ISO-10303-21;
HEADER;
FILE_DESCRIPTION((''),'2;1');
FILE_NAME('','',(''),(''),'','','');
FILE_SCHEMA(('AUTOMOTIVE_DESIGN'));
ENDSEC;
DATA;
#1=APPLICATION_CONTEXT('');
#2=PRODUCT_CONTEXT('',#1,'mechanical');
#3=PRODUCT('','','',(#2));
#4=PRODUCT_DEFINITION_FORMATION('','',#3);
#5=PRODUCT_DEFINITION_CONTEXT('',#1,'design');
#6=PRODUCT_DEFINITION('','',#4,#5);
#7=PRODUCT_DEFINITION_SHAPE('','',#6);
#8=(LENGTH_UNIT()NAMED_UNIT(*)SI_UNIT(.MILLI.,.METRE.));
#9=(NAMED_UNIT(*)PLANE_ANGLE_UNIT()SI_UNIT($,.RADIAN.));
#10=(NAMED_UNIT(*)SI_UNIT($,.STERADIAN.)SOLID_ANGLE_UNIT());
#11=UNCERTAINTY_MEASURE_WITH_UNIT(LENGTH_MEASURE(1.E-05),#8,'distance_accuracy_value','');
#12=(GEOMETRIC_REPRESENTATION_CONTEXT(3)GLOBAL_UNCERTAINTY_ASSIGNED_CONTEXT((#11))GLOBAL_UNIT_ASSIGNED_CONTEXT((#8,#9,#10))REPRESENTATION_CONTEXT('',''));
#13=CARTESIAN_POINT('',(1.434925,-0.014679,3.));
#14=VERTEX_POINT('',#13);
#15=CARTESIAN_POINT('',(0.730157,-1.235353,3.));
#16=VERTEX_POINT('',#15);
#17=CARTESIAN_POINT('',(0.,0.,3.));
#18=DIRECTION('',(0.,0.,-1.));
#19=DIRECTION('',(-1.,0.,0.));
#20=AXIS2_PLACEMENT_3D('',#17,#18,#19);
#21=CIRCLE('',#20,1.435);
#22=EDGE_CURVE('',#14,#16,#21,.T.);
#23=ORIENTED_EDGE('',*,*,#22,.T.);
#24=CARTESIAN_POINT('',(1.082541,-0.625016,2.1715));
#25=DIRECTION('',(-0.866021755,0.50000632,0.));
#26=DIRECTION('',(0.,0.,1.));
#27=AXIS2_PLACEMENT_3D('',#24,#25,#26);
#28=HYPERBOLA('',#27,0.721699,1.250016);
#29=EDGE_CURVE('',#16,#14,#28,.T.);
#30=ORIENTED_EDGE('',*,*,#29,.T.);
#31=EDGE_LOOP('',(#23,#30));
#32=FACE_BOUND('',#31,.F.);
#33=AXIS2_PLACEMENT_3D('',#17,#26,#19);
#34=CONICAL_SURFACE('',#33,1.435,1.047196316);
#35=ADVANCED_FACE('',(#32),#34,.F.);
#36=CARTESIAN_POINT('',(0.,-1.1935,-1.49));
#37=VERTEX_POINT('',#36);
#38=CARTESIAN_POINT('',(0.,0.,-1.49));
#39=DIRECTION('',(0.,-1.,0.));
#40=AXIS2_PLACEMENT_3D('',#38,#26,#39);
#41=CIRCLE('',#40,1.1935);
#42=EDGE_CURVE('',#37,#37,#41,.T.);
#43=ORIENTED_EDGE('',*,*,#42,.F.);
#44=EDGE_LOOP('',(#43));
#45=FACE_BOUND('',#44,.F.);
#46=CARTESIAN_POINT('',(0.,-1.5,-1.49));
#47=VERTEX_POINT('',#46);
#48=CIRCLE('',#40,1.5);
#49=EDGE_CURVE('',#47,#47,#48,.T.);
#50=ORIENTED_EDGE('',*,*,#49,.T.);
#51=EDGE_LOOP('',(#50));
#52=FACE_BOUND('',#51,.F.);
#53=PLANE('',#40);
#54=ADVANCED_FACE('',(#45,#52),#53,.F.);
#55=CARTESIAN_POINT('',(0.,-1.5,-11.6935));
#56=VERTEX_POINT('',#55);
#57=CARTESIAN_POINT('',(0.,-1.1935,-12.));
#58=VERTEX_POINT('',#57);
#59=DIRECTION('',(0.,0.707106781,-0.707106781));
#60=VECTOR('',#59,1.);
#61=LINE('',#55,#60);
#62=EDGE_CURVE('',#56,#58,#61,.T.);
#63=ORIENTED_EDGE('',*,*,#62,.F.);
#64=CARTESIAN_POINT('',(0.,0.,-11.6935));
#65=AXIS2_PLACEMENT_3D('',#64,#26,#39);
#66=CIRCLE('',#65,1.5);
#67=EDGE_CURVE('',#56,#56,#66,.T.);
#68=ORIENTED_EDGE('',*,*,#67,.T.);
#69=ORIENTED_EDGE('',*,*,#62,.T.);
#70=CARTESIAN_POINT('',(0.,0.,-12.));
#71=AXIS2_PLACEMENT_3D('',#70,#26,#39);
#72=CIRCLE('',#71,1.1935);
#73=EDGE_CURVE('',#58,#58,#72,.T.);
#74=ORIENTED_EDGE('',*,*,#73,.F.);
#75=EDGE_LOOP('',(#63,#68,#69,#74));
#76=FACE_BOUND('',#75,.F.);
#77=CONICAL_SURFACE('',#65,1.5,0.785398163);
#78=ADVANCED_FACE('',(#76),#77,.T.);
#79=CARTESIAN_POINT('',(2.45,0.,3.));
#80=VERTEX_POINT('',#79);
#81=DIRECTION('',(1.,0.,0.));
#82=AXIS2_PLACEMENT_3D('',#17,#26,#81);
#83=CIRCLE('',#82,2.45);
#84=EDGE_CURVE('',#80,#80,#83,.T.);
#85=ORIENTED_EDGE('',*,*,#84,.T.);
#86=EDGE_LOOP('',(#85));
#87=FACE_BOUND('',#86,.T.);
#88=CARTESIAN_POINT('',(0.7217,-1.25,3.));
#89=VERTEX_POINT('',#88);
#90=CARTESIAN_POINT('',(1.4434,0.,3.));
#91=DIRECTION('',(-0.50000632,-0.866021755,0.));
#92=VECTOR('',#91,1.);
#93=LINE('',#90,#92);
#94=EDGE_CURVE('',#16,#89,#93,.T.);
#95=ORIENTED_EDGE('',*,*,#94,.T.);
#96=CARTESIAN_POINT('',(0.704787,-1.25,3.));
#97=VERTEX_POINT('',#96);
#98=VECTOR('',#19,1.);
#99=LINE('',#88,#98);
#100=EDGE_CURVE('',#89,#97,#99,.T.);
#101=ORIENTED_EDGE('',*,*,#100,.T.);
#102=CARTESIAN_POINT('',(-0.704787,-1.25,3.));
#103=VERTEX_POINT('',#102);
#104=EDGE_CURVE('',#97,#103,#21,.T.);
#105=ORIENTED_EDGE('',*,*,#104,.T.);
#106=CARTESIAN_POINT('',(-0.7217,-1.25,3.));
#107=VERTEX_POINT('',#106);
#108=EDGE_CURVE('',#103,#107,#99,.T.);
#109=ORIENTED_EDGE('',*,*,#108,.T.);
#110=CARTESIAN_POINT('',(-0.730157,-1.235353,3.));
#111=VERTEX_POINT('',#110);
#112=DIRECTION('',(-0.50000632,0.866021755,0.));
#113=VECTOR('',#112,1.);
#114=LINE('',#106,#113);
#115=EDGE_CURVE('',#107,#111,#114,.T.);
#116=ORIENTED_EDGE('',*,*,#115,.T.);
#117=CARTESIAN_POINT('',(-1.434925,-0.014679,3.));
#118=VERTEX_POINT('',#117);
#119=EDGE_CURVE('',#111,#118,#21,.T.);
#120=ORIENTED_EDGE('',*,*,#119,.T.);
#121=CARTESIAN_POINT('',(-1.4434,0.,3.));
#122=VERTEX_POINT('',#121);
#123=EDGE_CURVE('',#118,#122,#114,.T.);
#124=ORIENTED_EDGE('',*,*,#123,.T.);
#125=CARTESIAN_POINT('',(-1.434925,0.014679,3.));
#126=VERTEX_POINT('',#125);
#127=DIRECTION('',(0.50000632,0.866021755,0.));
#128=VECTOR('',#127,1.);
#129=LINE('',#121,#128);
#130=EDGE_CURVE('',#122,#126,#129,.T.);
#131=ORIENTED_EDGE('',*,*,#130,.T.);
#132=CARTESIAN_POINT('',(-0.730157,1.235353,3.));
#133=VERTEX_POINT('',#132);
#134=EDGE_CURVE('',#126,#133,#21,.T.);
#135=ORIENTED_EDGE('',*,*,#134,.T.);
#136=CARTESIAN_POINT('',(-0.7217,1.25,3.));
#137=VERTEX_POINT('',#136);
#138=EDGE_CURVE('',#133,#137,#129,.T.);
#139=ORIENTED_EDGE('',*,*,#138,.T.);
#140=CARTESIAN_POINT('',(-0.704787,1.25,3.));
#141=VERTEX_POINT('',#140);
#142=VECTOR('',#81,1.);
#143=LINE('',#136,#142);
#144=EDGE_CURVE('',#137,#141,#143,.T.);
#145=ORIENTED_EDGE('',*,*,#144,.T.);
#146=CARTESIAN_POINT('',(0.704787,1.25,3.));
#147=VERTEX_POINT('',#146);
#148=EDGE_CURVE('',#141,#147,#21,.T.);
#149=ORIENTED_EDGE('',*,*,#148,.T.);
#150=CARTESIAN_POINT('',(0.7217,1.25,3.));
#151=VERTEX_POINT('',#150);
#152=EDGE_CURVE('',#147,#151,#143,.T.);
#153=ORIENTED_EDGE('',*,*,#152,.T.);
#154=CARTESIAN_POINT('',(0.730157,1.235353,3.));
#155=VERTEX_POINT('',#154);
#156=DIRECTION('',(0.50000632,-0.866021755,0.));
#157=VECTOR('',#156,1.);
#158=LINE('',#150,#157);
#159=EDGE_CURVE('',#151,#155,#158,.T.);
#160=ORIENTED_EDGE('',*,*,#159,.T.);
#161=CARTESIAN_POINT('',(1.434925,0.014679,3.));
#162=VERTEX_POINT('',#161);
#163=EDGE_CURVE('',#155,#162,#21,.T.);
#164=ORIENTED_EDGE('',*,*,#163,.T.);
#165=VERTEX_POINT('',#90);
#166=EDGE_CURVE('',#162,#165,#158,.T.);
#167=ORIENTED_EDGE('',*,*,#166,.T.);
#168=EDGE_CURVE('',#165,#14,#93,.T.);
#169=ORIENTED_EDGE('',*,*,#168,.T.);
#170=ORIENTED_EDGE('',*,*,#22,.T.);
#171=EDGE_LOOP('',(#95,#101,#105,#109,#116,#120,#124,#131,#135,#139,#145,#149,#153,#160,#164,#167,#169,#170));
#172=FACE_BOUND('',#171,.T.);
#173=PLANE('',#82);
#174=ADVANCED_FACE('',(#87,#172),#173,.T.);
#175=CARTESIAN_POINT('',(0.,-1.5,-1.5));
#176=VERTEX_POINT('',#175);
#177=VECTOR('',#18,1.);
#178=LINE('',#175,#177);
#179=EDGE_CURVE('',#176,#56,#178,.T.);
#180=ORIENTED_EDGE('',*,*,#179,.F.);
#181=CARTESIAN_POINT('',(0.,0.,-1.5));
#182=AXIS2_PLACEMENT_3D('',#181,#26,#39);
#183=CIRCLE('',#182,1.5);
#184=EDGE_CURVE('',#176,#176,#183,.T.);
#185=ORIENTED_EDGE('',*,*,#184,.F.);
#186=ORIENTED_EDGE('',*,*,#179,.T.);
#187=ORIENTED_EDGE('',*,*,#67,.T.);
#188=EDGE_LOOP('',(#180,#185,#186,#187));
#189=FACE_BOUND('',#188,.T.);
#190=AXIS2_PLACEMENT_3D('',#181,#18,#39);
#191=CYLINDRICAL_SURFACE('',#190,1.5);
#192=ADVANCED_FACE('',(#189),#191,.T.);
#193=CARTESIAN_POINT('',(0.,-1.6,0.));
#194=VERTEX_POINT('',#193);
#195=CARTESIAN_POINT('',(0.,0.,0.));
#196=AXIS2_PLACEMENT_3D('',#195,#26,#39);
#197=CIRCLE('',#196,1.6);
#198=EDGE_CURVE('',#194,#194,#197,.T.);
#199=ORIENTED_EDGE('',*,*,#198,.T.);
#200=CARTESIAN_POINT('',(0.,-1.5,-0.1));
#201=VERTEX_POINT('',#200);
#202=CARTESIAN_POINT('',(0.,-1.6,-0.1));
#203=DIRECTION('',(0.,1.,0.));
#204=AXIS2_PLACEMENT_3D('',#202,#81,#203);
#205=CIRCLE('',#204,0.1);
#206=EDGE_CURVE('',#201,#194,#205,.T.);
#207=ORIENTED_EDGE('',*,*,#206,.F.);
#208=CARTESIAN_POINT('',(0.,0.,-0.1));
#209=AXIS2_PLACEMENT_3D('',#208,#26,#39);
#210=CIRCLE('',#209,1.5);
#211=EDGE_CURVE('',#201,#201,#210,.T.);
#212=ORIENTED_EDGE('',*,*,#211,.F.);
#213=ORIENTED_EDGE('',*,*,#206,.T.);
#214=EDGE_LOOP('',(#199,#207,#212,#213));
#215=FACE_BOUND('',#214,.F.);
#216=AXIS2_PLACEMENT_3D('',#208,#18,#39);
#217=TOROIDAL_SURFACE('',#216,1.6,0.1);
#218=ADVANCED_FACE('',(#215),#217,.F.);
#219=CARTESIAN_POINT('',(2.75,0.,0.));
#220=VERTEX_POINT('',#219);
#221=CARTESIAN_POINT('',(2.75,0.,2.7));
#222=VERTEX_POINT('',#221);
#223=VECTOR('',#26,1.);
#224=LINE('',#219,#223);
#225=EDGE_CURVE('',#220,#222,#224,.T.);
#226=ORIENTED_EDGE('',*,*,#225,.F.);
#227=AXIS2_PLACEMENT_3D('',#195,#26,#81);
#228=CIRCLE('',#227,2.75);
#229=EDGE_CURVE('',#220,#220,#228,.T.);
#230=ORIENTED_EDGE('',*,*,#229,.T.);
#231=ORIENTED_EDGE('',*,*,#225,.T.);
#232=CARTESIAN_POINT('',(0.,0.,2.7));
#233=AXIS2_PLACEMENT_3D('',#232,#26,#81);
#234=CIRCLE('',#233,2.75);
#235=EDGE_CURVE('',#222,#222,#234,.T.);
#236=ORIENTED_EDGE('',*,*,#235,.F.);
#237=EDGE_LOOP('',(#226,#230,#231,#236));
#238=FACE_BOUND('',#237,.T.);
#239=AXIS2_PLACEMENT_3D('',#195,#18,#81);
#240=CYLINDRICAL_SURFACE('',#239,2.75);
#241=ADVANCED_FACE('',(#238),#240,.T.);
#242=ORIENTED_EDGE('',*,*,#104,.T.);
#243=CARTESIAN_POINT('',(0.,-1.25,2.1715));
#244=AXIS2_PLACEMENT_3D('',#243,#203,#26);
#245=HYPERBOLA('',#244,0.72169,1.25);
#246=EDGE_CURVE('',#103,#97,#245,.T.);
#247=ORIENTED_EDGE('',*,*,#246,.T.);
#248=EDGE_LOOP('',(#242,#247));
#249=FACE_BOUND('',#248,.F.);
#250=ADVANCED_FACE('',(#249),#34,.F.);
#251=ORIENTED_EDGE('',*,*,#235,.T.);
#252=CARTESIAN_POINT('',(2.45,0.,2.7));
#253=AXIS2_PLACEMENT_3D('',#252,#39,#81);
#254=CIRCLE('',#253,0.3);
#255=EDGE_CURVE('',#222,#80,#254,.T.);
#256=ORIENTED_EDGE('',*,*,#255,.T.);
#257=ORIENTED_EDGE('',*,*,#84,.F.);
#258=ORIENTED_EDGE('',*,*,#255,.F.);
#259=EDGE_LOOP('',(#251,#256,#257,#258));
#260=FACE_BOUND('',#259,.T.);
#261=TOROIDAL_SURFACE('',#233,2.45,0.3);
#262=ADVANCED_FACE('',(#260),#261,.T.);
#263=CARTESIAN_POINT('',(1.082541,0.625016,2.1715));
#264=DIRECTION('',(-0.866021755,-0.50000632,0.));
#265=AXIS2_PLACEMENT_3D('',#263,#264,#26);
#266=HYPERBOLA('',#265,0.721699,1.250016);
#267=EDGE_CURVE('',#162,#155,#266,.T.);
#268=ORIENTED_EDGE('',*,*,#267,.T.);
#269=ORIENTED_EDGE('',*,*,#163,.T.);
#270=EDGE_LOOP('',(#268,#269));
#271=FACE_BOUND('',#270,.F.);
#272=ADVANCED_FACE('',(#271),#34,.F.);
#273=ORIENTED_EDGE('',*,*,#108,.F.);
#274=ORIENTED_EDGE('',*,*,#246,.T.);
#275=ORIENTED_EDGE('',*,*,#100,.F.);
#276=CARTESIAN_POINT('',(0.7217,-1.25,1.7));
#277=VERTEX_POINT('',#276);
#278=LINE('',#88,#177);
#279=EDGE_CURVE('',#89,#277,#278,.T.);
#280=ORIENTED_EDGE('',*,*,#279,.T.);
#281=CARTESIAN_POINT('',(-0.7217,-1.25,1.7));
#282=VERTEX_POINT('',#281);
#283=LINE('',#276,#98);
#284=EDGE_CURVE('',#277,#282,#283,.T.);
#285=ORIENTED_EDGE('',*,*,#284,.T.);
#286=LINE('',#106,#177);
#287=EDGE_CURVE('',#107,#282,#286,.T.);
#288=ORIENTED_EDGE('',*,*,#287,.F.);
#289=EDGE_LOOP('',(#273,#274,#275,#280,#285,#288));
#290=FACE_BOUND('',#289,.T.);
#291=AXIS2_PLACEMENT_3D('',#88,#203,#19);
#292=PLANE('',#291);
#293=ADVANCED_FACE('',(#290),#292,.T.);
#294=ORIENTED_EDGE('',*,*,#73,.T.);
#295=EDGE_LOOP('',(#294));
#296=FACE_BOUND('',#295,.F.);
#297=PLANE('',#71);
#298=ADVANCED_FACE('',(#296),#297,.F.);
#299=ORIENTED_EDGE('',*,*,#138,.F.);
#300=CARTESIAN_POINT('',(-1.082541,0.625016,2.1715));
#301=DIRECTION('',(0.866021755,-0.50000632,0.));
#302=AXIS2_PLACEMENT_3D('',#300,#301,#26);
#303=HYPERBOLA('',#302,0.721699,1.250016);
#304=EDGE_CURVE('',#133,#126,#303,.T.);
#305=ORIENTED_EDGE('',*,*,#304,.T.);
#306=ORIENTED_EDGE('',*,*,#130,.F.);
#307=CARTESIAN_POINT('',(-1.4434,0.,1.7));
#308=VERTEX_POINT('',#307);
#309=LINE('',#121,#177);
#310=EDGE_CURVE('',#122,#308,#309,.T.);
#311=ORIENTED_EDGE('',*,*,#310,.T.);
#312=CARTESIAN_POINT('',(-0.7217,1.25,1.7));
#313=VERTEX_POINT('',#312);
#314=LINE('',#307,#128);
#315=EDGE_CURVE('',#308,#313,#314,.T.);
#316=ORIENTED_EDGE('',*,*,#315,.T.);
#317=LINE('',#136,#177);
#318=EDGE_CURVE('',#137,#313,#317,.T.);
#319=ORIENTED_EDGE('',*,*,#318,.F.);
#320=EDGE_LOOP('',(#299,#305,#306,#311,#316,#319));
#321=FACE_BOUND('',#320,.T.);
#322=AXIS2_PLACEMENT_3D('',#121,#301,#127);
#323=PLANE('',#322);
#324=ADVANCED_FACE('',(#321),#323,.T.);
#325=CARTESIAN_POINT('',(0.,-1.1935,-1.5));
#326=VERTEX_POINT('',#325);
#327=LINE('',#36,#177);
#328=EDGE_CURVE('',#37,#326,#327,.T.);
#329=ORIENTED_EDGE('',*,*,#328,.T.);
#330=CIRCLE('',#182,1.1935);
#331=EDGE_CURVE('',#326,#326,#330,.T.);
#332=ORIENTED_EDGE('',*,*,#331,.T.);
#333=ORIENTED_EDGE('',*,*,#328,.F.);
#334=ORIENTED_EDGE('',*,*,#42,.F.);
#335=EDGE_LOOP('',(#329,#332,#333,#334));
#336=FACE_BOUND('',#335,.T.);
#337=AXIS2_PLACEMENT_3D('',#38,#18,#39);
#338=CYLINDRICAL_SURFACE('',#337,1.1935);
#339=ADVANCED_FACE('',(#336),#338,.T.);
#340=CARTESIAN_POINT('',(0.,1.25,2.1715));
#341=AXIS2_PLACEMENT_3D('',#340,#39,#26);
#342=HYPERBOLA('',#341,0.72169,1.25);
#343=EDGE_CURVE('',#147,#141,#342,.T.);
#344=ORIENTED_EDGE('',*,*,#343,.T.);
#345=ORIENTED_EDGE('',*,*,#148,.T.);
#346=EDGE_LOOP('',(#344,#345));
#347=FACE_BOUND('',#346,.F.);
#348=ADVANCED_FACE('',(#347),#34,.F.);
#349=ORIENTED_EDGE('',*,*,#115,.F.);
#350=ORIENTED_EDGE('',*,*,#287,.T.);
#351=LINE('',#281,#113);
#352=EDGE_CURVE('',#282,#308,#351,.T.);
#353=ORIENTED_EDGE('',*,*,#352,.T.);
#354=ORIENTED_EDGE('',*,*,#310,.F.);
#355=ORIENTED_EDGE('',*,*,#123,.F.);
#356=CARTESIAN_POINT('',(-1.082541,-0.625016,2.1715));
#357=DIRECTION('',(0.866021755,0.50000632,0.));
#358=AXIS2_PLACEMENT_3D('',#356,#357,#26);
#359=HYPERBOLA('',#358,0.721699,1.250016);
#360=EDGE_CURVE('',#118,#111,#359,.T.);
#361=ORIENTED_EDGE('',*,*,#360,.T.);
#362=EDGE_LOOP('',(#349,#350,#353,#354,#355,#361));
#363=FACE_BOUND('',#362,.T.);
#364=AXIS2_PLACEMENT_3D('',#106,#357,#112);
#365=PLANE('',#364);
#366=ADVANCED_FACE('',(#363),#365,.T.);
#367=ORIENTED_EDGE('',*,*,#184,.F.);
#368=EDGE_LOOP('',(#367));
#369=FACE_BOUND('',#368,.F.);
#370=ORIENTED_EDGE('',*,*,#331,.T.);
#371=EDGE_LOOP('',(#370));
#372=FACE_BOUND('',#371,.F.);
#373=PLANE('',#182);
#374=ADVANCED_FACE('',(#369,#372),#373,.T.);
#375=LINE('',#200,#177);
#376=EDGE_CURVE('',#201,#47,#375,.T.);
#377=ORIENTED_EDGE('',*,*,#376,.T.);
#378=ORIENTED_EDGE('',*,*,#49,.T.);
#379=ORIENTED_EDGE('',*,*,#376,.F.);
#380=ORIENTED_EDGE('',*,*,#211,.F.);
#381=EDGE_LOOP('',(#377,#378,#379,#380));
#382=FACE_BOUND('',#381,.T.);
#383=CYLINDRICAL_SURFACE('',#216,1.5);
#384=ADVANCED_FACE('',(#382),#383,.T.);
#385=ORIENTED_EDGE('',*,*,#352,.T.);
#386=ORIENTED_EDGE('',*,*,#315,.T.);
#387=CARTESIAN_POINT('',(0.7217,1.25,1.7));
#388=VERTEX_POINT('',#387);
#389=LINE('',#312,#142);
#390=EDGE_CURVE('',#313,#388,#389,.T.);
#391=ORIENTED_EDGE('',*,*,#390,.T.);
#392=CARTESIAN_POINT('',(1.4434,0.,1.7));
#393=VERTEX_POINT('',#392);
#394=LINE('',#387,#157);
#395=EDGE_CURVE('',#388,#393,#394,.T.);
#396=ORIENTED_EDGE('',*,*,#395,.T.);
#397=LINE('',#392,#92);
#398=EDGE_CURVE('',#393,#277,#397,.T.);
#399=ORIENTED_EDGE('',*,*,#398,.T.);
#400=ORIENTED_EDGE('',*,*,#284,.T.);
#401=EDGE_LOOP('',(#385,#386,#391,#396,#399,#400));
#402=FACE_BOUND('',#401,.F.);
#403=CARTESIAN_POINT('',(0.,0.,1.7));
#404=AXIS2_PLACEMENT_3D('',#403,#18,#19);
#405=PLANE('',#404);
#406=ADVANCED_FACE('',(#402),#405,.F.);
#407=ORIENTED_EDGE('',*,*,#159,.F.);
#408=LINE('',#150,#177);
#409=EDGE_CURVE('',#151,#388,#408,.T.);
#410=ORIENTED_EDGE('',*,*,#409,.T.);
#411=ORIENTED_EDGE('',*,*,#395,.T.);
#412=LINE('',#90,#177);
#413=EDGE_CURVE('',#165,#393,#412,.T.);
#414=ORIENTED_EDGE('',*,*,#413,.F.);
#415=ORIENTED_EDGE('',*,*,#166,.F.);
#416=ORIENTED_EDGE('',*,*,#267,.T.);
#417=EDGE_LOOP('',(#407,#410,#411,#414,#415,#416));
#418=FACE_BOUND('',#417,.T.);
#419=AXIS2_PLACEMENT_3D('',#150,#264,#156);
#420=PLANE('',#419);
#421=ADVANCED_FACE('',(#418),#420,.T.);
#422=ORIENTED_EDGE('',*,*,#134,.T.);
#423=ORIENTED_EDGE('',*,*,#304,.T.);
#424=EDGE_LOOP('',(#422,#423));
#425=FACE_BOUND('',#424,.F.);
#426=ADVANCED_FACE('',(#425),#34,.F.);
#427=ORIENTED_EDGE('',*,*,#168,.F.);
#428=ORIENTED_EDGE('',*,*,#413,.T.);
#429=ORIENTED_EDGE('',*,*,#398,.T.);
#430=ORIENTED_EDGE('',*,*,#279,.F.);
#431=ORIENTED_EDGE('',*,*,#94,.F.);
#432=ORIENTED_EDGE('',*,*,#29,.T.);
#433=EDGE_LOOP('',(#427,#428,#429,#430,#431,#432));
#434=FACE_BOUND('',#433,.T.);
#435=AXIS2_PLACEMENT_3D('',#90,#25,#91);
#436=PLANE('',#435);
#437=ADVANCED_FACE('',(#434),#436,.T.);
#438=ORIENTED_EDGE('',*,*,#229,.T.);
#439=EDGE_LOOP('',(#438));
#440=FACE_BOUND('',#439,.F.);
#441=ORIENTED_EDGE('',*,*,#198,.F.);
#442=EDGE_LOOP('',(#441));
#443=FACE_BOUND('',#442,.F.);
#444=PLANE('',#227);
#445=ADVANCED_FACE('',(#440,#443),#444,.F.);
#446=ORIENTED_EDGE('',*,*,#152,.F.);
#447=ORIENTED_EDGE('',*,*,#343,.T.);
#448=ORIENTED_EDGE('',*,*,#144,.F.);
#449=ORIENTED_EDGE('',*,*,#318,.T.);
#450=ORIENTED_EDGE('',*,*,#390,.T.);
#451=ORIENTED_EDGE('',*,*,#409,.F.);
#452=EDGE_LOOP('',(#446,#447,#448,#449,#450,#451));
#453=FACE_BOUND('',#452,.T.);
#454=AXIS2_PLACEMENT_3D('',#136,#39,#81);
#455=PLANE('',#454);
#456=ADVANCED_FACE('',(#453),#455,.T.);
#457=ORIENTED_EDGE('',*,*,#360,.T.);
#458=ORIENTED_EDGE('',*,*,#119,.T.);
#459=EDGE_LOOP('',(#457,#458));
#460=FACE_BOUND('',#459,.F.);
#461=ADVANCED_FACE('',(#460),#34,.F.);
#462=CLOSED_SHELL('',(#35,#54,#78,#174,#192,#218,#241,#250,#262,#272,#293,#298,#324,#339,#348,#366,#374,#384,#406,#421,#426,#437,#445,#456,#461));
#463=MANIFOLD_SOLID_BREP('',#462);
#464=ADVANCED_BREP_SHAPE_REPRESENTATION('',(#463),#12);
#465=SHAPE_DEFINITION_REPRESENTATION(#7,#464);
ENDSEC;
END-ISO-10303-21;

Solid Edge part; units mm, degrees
sketch "Sketch1" plane through (0, 0, 0) normal (0, 0, 1) x (1, 0, 0)
  circle A0 centre (0, 0) radius 2.75
extrude "Protrusion1" add sketch "Sketch1" along normal blind 3
sketch "Sketch2" plane through (0, 0, 3) normal (0, 0, 1) x (0, 1, 0)
  line L0 (0, 1.4434) -> (1.25, 0.7217)
  line L1 (1.25, 0.7217) -> (1.25, -0.7217)
  line L2 (1.25, -0.7217) -> (0, -1.4434)
  line L3 (0, -1.4434) -> (-1.25, -0.7217)
  line L4 (-1.25, -0.7217) -> (-1.25, 0.7217)
  line L5 (-1.25, 0.7217) -> (0, 1.4434)
extrude "Cutout1" cut sketch "Sketch2" against normal blind 1.3
fillet "Round1" radius 0.3 1 edges at (-2.75, 0, 3)
sketch "Sketch3" plane through (0, 0, 0) normal (1, 0, 0) x (0, 1, 0)
  line L0 (-1.1935, -12) -> (0, -12)
  line L1 (-1.5, -11.6935) -> (-1.1935, -12)
  line L2 (-1.5, -1.5) -> (-1.5, -11.6935)
  line L3 (-1.1935, -1.5) -> (-1.5, -1.5)
  line L4 (-1.1935, -1.49) -> (-1.1935, -1.5)
  line L5 (-1.5, -1.49) -> (-1.1935, -1.49)
  line L6 (-1.5, -0.1) -> (-1.5, -1.49)
  arc A0 (-1.5, -0.1) -> (-1.6, 0) centre (-1.6, -0.1) ccw
  dimension "D1" = 1.5
  dimension "D2" = 0.01
  dimension "D3" = 0.1
  dimension "D4" = 12
revolve "RevolvedProtrusion1" add sketch "Sketch3" angle 360 about axis through (0, 0, -60.325) along (0, 0, 1) material side at (0, -0.5968, -11.95)
cosmetic_thread "Thread1" size "M3"
sketch "Sketch4" plane through (0, 0, 0) normal (0, -1, 0) x (1, 0, 0)
  line L0 (-1.435, 3) -> (0, 2.1715)
revolve "RevolvedCutout1" cut sketch "Sketch4" angle 360 about axis through (0, 0, 57.15) along (0, 0, -1) material side at (-0.6925, 0, 2.6291)
properties material "Stahl"
